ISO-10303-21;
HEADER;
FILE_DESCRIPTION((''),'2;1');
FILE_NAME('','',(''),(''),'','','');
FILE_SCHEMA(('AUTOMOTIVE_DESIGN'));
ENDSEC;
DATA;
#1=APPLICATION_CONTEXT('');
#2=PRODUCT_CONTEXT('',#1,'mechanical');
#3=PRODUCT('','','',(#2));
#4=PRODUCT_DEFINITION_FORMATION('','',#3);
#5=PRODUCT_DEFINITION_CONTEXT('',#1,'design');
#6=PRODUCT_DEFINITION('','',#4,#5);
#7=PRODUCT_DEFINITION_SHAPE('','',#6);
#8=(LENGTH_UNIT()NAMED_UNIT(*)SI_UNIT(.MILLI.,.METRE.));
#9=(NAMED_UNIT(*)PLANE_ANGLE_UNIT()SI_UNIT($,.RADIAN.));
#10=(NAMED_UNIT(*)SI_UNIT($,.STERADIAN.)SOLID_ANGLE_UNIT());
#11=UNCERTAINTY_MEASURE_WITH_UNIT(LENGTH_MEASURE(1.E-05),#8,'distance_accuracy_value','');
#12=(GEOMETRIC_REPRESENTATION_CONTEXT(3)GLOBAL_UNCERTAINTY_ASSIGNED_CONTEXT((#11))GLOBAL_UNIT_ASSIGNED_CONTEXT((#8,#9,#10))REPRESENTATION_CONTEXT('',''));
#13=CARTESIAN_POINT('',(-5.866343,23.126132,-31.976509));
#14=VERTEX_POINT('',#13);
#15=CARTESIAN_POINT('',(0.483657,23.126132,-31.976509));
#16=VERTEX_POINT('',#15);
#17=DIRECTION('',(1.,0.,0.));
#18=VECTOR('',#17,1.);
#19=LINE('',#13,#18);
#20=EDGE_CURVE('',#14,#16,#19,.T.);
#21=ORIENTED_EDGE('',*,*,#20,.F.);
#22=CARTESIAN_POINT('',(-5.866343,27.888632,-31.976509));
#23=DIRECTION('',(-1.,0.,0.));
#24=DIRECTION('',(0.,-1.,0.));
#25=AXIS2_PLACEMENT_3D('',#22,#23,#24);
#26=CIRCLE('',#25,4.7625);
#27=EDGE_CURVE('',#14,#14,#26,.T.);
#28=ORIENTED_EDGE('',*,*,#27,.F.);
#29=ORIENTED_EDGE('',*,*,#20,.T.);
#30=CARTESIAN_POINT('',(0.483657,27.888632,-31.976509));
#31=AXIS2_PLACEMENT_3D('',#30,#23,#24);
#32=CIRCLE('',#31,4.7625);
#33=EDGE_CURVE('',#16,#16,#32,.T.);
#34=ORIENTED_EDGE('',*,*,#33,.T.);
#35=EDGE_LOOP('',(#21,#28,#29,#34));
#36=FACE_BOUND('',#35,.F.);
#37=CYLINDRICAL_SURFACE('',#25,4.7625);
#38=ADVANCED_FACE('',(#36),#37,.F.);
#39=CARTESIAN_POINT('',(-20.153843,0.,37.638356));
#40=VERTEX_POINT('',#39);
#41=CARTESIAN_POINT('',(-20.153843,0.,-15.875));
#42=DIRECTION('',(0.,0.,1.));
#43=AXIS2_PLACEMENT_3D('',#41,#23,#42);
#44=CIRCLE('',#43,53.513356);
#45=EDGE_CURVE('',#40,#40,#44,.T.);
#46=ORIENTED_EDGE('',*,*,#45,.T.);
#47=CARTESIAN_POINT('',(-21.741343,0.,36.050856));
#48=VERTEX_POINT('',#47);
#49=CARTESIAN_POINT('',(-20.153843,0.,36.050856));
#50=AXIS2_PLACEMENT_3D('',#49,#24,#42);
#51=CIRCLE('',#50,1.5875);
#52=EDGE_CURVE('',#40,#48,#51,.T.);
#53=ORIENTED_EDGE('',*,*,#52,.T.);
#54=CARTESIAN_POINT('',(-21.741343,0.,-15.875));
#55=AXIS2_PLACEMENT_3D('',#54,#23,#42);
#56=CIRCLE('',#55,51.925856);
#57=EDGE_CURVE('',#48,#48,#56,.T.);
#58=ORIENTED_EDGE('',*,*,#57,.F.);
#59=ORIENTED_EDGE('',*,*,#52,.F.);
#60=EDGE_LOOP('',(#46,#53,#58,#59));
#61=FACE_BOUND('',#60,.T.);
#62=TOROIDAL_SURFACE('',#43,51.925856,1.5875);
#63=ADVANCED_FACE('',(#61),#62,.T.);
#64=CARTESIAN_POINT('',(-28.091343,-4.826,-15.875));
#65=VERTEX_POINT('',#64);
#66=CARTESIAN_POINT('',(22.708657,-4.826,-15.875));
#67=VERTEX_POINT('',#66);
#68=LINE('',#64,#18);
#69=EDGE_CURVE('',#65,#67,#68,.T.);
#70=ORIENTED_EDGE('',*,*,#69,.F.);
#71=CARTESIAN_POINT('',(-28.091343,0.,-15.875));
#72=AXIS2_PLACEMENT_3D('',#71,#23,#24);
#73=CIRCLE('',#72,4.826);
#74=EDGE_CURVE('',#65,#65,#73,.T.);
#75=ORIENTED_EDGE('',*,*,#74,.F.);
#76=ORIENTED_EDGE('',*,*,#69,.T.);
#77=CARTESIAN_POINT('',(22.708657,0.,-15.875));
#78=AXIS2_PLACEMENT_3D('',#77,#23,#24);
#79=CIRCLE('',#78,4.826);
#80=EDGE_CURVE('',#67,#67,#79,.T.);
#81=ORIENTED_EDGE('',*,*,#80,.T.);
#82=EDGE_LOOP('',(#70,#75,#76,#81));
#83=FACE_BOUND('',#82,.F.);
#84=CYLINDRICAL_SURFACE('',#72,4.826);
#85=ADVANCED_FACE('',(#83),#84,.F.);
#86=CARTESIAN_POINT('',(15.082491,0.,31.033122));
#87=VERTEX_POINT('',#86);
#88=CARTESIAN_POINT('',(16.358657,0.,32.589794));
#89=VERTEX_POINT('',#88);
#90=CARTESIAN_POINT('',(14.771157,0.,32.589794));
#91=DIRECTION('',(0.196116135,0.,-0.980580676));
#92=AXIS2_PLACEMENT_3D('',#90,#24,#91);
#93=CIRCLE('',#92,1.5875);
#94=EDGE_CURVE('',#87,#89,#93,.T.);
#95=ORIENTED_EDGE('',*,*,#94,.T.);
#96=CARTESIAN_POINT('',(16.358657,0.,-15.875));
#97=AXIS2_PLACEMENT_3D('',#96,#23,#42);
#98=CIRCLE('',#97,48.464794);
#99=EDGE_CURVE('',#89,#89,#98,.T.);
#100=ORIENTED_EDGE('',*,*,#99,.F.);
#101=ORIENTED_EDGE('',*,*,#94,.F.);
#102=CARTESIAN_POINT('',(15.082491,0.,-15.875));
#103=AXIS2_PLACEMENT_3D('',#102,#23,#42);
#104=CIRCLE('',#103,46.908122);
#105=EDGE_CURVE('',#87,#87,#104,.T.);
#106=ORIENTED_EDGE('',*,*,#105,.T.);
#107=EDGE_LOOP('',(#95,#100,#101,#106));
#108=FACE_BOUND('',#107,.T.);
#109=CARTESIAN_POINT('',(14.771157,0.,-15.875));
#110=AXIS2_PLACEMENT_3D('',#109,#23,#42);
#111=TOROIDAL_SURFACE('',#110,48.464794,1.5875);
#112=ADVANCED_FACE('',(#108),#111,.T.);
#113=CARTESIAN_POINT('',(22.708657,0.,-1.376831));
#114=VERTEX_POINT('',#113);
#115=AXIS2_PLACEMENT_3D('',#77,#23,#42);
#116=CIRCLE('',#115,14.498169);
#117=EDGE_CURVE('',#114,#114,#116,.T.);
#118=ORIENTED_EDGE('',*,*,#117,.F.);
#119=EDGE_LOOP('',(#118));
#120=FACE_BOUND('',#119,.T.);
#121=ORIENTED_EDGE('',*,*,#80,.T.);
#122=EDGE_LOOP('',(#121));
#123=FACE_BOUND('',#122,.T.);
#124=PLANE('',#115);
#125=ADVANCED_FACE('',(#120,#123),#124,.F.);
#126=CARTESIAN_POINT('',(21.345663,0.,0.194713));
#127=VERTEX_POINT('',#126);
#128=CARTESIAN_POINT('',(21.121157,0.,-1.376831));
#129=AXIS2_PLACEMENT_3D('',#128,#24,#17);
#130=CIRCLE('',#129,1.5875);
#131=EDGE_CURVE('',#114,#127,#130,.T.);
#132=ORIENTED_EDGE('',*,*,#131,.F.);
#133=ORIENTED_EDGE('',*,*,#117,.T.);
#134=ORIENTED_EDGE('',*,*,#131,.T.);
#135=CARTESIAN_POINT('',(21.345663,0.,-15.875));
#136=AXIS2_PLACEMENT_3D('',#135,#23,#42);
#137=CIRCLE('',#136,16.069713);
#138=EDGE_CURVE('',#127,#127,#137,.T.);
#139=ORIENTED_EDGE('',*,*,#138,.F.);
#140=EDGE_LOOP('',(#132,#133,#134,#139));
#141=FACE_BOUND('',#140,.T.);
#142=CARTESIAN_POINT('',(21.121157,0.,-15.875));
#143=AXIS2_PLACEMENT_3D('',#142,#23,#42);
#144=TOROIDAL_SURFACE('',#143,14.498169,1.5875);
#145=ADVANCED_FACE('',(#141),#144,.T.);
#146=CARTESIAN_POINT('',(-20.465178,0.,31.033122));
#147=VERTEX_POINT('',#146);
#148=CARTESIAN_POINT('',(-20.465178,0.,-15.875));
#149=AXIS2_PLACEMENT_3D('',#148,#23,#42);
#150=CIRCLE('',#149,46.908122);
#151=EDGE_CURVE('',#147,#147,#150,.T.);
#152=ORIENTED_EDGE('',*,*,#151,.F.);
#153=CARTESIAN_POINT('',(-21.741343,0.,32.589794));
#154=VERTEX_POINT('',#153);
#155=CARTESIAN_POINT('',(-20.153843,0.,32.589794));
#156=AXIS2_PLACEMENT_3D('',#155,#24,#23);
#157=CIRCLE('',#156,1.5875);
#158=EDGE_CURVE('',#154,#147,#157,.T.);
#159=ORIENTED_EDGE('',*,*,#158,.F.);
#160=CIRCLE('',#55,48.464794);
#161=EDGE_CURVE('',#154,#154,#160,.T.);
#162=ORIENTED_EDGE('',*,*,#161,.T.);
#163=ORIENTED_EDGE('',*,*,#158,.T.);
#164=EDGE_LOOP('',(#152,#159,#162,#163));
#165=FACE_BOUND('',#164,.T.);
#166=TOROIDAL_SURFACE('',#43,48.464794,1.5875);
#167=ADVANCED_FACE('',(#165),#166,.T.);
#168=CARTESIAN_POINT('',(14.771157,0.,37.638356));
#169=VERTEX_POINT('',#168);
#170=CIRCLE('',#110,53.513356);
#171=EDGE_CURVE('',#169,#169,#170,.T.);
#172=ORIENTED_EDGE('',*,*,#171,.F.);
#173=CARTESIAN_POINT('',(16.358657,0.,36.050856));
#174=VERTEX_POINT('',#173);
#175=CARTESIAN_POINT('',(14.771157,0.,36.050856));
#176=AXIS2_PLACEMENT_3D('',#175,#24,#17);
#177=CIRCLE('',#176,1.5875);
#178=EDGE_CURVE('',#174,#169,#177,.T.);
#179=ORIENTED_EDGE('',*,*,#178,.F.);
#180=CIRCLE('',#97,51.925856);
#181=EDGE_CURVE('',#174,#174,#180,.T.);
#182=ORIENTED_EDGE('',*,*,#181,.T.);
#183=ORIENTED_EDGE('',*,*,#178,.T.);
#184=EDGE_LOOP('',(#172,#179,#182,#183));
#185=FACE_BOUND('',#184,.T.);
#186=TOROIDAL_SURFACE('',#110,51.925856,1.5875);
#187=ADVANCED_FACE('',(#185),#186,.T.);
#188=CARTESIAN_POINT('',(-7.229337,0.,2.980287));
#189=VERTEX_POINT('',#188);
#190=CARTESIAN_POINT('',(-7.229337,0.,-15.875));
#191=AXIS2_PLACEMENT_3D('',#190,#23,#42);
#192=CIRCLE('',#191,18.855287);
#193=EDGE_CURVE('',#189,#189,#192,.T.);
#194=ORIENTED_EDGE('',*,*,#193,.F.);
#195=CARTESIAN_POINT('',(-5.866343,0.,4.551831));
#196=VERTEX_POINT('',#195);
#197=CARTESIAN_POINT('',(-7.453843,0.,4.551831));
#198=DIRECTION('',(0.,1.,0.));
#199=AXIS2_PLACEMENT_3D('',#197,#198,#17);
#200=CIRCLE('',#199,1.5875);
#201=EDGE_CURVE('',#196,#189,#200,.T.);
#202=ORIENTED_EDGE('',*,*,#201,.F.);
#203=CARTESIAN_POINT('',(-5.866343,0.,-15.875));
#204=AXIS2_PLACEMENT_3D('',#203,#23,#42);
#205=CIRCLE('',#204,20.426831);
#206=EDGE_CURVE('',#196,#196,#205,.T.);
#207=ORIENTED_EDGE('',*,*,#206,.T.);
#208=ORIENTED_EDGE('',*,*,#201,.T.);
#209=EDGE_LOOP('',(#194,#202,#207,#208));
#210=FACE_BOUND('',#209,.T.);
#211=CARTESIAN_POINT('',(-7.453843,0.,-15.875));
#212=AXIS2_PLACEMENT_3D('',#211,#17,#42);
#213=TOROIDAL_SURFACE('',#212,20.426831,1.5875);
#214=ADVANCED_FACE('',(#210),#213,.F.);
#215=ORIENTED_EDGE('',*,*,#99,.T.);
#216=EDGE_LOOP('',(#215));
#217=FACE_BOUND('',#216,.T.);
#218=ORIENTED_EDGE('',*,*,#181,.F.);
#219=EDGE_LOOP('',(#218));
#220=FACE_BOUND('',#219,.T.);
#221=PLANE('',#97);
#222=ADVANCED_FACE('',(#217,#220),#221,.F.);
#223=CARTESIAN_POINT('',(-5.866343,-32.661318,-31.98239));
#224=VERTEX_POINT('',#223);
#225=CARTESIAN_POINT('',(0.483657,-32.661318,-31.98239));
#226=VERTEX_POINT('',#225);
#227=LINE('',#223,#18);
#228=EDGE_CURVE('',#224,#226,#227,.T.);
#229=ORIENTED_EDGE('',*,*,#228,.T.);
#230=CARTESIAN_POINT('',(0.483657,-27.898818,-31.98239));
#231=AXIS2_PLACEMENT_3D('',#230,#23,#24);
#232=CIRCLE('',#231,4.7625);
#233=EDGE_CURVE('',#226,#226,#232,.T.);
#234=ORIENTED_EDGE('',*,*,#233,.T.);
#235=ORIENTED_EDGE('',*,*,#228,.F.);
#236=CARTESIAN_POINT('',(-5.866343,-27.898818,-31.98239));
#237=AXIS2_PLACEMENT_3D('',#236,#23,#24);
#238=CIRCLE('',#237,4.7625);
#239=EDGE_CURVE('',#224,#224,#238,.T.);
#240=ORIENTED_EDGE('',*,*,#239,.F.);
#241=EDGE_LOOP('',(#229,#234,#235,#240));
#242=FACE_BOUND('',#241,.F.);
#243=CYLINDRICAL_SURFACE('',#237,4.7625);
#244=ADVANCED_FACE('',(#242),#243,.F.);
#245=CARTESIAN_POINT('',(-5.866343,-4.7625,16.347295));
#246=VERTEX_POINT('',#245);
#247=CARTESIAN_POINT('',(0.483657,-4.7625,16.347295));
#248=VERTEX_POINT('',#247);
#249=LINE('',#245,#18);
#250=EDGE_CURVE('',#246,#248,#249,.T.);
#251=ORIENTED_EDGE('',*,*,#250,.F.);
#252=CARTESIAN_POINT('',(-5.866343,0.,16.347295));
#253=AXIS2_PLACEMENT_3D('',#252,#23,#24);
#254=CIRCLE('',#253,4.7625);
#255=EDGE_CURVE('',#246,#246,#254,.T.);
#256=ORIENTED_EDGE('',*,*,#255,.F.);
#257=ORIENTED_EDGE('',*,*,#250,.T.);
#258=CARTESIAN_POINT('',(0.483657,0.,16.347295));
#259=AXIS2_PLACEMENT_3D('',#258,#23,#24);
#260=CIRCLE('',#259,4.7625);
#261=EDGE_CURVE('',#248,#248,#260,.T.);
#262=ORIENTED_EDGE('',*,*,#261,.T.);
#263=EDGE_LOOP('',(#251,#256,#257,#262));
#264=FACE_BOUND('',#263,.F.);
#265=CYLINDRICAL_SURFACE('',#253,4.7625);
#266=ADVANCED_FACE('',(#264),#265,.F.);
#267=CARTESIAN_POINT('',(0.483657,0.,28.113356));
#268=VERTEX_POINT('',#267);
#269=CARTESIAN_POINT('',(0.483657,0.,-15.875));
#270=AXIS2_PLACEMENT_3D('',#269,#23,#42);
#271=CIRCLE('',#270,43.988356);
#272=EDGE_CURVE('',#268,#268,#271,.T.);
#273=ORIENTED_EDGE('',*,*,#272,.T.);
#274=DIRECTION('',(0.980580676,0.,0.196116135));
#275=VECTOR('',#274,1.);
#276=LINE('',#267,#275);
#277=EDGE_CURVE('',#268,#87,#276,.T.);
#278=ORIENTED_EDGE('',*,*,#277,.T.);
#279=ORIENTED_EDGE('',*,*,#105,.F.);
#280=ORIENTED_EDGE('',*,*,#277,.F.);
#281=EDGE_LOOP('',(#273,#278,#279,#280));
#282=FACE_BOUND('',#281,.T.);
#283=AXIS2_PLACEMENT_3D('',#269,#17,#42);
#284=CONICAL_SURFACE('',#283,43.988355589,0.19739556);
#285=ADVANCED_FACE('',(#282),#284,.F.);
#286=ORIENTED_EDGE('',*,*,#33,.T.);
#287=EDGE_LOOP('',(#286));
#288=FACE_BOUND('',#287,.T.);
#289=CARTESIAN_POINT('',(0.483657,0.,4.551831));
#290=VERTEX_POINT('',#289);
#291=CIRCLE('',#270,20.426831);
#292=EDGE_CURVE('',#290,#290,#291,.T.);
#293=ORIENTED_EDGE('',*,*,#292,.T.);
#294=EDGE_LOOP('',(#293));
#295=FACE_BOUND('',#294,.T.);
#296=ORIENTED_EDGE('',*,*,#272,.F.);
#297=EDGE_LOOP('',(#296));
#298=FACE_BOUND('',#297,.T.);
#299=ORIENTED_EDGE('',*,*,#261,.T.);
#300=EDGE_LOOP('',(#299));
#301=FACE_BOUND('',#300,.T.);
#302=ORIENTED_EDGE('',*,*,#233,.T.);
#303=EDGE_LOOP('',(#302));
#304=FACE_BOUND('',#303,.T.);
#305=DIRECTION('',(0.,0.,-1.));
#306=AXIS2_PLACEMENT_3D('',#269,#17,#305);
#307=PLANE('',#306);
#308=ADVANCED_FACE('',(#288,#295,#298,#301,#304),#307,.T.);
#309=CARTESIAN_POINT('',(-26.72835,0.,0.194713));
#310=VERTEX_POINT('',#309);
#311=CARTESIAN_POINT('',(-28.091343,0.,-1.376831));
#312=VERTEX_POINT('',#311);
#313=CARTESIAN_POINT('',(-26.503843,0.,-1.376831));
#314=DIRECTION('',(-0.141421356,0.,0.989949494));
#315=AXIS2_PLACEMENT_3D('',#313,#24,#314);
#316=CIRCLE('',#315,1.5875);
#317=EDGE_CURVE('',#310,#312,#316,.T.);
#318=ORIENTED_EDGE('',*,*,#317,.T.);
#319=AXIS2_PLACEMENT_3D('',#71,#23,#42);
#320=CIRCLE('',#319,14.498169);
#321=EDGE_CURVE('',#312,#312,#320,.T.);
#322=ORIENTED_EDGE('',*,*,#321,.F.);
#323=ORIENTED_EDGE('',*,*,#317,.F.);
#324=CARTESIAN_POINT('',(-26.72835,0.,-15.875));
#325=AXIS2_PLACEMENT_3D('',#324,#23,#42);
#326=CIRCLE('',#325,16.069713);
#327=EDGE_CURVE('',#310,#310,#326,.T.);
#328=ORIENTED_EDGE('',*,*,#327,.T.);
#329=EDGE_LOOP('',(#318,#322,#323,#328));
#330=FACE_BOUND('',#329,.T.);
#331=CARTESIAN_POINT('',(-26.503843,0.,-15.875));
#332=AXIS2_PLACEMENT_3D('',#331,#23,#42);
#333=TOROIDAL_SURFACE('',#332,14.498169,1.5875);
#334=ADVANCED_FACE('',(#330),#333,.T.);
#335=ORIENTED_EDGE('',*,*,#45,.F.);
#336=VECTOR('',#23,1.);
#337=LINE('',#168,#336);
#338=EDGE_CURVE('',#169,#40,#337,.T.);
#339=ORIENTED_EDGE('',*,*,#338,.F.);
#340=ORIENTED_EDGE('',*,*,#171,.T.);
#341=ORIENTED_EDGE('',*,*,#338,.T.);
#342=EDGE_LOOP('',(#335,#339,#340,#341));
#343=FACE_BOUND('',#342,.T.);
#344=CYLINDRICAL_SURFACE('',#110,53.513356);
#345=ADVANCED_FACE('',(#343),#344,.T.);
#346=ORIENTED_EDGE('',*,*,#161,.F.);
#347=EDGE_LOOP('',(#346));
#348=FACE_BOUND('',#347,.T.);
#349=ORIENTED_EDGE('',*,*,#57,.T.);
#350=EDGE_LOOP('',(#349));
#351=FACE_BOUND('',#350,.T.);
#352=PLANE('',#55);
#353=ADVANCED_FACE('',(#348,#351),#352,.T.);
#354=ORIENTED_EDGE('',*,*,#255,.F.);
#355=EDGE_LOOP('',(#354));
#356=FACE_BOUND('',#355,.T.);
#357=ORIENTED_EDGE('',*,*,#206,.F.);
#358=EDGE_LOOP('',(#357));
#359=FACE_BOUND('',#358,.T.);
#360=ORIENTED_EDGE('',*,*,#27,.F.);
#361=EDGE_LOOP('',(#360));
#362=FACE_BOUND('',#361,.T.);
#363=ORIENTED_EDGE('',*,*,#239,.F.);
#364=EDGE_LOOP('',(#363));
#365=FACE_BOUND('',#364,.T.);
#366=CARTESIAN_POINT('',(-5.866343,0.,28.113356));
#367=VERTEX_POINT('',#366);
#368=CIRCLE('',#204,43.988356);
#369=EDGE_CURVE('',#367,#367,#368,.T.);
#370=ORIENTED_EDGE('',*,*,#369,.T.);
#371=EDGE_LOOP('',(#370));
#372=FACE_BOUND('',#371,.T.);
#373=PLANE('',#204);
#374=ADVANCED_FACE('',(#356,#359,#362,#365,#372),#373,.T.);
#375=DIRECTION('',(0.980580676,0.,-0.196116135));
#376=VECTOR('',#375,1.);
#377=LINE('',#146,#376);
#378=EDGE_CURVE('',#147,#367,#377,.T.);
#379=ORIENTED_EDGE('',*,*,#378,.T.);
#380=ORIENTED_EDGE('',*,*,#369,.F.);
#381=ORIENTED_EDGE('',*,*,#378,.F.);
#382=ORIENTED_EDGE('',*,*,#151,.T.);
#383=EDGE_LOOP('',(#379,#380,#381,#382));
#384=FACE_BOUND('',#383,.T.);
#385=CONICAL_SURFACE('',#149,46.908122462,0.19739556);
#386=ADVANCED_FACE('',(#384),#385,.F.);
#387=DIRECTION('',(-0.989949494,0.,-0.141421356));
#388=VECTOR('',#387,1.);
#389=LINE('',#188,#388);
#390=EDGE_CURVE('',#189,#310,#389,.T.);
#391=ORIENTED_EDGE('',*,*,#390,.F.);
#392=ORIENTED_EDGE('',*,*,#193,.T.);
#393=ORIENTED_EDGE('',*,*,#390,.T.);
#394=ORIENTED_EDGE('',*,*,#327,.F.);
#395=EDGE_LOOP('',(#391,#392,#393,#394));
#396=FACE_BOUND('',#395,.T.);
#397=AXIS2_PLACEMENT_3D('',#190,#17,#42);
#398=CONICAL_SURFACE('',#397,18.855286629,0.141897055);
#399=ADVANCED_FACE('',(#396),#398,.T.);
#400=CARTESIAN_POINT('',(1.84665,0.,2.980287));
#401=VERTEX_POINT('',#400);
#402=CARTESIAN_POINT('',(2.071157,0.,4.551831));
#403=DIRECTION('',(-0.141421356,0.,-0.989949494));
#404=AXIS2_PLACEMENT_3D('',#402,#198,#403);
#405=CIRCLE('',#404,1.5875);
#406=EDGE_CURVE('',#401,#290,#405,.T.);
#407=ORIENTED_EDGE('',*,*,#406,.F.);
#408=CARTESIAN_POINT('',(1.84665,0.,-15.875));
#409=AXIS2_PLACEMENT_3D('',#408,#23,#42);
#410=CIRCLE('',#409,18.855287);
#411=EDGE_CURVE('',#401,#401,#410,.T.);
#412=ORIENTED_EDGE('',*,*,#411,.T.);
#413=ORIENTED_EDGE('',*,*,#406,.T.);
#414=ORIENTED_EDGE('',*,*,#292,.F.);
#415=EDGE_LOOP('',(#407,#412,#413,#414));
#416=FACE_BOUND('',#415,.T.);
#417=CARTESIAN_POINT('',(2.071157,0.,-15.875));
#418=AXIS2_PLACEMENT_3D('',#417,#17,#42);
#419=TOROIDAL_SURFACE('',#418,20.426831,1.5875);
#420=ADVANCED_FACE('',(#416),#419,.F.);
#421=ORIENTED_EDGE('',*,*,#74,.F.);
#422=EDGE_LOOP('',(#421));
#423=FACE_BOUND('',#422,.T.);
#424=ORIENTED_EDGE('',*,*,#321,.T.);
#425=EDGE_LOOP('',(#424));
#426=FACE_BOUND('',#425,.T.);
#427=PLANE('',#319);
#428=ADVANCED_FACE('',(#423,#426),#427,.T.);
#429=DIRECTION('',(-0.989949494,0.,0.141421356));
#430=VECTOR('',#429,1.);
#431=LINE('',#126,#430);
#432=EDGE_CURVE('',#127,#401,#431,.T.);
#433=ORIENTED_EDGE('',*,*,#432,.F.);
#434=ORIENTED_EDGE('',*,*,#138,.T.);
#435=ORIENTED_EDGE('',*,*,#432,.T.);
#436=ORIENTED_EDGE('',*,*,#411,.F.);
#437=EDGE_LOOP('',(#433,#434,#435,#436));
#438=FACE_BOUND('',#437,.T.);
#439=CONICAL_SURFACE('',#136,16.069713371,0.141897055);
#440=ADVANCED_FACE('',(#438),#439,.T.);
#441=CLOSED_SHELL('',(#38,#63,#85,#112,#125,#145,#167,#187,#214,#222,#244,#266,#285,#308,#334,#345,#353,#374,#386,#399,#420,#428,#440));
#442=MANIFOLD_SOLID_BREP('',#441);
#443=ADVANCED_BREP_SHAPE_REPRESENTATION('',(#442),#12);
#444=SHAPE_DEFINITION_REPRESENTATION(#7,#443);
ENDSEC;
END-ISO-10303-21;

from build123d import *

# Parameters (mm, degrees)
F2_R     = 4.826
F2_R_2   = 1.5875
F3_DEPTH = 50.8010001
F4_R     = 4.7625
F5_DEPTH = 28.5760001


with BuildPart() as f1:
    # F0 (on Front) → F1 (revolve)
    with BuildSketch(Plane.XZ):
        Polygon((0.4836565733, 28.1133555889), (-5.8663434267, 28.1133555889), (-5.8663434267, 20.1758555889), (-2.6913434267, 20.1758555889), (0.4836565733, 20.1758555889), align=None)
        with BuildLine():
            Line((0.4836565733, 10.6508555889), (-5.8663434267, 10.6508555889))
            Line((-5.8663434267, 10.6508555889), (-5.8663434267, 4.5518314502))
            ThreePointArc((-5.8663434267, 4.5518314502), (-6.2545602731, 3.5116986858), (-7.2293370237, 2.980286629))
            Line((-7.2293370237, 2.980286629), (-26.7283498297, 0.194713371))
            ThreePointArc((-26.7283498297, 0.194713371), (-27.7031265803, -0.3366986858), (-28.0913434267, -1.3768314502))
            Line((-28.0913434267, -1.3768314502), (-28.0913434267, -14.2875))
            ThreePointArc((-28.0913434267, -14.2875), (-27.6263754418, -15.4100320151), (-26.5038434267, -15.875))
            Line((-26.5038434267, -15.875), (21.1211565733, -15.875))
            ThreePointArc((21.1211565733, -15.875), (22.2436885884, -15.4100320151), (22.7086565733, -14.2875))
            Line((22.7086565733, -14.2875), (22.7086565733, -1.3768314502))
            ThreePointArc((22.7086565733, -1.3768314502), (22.3204397269, -0.3366986858), (21.3456629763, 0.194713371))
            Line((21.3456629763, 0.194713371), (1.8466501703, 2.980286629))
            ThreePointArc((1.8466501703, 2.980286629), (0.8718734197, 3.5116986858), (0.4836565733, 4.5518314502))
            Line((0.4836565733, 4.5518314502), (0.4836565733, 10.6508555889))
        make_face()
        Polygon((-2.6913434267, 20.1758555889), (-5.8663434267, 20.1758555889), (-5.8663434267, 10.6508555889), (0.4836565733, 10.6508555889), (0.4836565733, 20.1758555889), align=None)
        with BuildLine():
            Line((14.7711565733, 37.6383555889), (-20.1538434267, 37.6383555889))
            ThreePointArc((-20.1538434267, 37.6383555889), (-21.2763754418, 37.173387604), (-21.7413434267, 36.0508555889))
            Line((-21.7413434267, 36.0508555889), (-21.7413434267, 32.5897942845))
            ThreePointArc((-21.7413434267, 32.5897942845), (-21.3815240761, 31.5833368968), (-20.4651777912, 31.0331224618))
            Line((-20.4651777912, 31.0331224618), (-5.8663434267, 28.1133555889))
            Line((-5.8663434267, 28.1133555889), (0.4836565733, 28.1133555889))
            Line((0.4836565733, 28.1133555889), (15.0824909378, 31.0331224618))
            ThreePointArc((15.0824909378, 31.0331224618), (15.9988372227, 31.5833368968), (16.3586565733, 32.5897942845))
            Line((16.3586565733, 32.5897942845), (16.3586565733, 36.0508555889))
            ThreePointArc((16.3586565733, 36.0508555889), (15.8936885884, 37.173387604), (14.7711565733, 37.6383555889))
        make_face()
    revolve(axis=Axis((-2.6913434267, 0, -15.875), (-1, 0, 0)))

    # F2 (on face) → F3 (cut, through all)
    with BuildSketch(Plane(origin=(-28.0913434267, 0, 0), x_dir=(0, -1, 0), z_dir=(-1, 0, 0))):
        with Locations((0, -15.875)):
            Circle(F2_R)
        with Locations((0, -15.875)):
            Circle(F2_R_2, mode=Mode.SUBTRACT)
        with Locations((0, -15.875)):
            Circle(F2_R_2)
    extrude(amount=-F3_DEPTH, mode=Mode.SUBTRACT)

    # F4 (on face) → F5 (cut, through all)
    with BuildSketch(Plane(origin=(-5.8663434267, 0, 0), x_dir=(0, -1, 0), z_dir=(-1, 0, 0))):
        with BuildLine():
            ThreePointArc((0, 11.5847946733), (3.3675960454, 12.9796986279), (4.7625, 16.3472946733))
            ThreePointArc((4.7625, 16.3472946733), (-3.3675960454, 19.7148907187), (0, 11.5847946733))
        make_face()
        with Locations((27.8988178469, -31.982389994)):
            Circle(F4_R)
        with Locations((-27.8886323176, -31.9765093759)):
            Circle(F4_R)
    extrude(amount=-F5_DEPTH, mode=Mode.SUBTRACT)


solid = f1.part
